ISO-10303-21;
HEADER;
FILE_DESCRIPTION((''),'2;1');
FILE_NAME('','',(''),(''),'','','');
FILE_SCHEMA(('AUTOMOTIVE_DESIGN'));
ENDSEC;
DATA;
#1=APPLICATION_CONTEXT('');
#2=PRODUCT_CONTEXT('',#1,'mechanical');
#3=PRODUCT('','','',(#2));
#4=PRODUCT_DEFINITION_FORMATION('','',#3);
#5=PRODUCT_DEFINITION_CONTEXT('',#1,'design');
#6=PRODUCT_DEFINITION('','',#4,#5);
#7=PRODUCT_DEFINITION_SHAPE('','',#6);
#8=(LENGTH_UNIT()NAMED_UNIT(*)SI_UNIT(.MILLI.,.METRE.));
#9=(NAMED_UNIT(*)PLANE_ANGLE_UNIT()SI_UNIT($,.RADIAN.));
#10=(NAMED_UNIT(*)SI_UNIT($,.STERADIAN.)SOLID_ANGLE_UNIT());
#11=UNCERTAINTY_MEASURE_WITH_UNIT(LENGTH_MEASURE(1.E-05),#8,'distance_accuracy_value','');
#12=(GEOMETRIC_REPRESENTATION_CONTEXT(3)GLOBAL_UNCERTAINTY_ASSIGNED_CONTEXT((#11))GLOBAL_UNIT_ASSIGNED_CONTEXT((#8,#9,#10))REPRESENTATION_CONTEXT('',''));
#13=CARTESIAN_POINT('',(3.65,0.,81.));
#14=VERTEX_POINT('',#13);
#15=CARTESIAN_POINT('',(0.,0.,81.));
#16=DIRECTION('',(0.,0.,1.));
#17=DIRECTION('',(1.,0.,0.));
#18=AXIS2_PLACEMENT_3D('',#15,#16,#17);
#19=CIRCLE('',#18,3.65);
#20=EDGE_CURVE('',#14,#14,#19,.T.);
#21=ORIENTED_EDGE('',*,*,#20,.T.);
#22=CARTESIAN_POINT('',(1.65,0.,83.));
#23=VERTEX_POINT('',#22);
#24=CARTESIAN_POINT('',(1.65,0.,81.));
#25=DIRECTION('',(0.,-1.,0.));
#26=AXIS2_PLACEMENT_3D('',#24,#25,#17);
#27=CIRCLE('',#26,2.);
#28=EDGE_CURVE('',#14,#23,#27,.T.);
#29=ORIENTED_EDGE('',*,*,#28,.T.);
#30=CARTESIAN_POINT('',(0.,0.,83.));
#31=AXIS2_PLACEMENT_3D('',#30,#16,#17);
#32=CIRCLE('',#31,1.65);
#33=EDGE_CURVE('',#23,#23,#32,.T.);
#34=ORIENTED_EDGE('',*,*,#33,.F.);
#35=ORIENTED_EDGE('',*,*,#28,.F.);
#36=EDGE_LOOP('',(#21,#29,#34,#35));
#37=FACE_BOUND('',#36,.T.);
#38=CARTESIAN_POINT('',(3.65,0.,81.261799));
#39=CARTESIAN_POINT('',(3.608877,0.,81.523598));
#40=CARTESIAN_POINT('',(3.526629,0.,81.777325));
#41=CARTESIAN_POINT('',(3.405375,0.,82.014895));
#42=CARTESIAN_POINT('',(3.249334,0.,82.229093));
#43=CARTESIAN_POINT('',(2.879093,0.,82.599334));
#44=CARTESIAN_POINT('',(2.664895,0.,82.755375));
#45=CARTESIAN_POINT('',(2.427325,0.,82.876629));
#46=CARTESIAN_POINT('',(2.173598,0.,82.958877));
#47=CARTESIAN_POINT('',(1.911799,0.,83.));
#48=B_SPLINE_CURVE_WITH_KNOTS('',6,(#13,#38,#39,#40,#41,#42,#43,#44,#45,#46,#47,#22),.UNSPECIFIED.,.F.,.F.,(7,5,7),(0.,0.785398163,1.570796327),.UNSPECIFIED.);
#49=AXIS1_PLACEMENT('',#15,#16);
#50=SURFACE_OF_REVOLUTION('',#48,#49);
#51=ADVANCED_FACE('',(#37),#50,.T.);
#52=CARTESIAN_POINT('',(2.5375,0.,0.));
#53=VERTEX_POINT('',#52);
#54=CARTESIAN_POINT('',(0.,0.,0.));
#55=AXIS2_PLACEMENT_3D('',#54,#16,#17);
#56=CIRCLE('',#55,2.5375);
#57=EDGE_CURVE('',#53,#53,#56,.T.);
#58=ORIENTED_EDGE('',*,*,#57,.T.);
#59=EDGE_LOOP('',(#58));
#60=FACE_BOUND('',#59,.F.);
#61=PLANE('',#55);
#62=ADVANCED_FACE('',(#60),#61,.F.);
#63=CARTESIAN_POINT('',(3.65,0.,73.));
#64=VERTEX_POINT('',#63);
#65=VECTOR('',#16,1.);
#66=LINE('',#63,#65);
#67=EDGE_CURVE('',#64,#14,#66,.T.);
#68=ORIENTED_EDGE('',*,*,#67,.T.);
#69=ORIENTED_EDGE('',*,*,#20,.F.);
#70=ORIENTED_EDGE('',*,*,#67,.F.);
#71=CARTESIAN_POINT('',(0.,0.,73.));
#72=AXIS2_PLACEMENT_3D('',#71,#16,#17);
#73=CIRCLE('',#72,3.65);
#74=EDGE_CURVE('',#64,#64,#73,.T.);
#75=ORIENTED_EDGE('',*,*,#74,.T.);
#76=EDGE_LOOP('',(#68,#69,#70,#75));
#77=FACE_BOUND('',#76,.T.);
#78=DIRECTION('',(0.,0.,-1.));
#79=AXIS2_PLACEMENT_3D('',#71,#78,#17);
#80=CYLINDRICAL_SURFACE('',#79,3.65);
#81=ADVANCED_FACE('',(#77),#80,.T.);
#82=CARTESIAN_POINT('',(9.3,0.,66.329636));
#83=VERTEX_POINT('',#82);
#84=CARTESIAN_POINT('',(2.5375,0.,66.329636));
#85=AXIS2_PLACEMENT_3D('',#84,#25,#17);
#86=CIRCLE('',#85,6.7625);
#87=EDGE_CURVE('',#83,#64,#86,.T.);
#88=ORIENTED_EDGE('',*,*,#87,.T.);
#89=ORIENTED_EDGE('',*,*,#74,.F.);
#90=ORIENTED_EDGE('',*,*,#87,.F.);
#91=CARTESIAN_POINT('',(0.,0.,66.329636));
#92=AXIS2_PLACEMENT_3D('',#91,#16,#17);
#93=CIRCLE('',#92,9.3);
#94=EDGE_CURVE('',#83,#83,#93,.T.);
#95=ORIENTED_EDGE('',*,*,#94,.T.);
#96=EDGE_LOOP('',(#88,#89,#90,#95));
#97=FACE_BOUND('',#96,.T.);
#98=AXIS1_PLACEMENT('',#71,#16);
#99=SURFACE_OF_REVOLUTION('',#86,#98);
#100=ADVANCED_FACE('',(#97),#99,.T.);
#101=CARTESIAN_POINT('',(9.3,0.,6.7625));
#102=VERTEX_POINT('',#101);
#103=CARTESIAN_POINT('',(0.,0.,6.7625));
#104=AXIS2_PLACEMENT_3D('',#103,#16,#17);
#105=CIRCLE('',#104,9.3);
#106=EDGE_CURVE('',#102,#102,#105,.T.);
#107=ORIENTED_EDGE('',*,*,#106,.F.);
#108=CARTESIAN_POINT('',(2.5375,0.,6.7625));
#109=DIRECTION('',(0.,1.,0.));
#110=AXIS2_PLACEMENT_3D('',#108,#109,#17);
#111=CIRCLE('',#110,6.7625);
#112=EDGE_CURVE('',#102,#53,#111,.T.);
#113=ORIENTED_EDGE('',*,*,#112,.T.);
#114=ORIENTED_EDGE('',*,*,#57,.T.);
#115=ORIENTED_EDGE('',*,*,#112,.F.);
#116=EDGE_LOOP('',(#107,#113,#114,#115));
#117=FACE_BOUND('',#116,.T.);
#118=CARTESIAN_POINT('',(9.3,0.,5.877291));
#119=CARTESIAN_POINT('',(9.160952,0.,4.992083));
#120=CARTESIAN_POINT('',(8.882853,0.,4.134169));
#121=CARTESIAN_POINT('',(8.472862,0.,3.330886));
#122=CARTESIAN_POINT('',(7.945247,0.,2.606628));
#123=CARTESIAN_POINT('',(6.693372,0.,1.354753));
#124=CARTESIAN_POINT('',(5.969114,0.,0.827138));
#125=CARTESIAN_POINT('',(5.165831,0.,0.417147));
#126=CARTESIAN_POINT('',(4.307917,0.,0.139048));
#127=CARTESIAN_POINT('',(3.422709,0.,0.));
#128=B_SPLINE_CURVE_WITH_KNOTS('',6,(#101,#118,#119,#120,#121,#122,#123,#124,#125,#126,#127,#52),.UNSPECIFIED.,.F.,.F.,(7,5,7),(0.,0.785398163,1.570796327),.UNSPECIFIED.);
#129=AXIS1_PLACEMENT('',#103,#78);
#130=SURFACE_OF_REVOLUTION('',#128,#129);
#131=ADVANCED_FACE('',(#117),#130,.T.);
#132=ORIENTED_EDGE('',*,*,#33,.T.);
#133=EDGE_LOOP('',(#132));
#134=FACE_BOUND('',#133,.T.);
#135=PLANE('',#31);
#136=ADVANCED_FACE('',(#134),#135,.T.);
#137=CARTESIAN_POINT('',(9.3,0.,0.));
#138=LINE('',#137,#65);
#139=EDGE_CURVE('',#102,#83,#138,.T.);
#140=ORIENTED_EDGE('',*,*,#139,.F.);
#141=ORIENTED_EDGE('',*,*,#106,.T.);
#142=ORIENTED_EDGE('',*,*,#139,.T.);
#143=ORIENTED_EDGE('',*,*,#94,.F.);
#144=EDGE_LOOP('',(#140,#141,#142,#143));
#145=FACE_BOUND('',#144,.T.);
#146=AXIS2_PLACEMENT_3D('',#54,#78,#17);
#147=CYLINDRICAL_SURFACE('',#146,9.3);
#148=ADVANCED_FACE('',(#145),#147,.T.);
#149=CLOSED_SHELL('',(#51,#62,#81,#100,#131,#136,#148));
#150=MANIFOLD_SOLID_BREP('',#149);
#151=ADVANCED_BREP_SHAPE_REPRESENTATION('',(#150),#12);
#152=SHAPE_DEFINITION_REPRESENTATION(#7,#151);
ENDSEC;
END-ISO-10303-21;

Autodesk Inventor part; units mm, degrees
ref_plane "YZ Plane" through (0, 0, 0) normal (1, 0, 0) x (0, 1, 0)
ref_plane "XZ Plane" through (0, 0, 0) normal (0, 1, 0) x (-1, 0, 0)
ref_plane "XY Plane" through (0, 0, 0) normal (0, 0, 1) x (1, 0, 0)
sketch "Sketch1" plane through (0, 0, 0) normal (0, 0, 1) x (1, 0, 0)
  circle A0 centre (0, 0) radius 9.3
  dimension "d0" = 18.6
extrude "Extrusion1" add sketch "Sketch1" along normal blind 73
sketch "Sketch2" plane through (0, 0, 73) normal (0, 0, 1) x (1, 0, 0)
  circle A0 centre (0, 0) radius 3.65
  dimension "d3" = 7.3
extrude "Extrusion2" add sketch "Sketch2" along normal blind 10
fillet "Fillet1" radius 6.7625 1 edges at (-9.3, 0, 73)
fillet "Fillet2" radius 2 1 edges at (-3.65, 0, 83)
fillet "Fillet3" radius 6.7625 1 edges at (-9.3, 0, 0)
properties part number "12g_CO2_Cartridge"
